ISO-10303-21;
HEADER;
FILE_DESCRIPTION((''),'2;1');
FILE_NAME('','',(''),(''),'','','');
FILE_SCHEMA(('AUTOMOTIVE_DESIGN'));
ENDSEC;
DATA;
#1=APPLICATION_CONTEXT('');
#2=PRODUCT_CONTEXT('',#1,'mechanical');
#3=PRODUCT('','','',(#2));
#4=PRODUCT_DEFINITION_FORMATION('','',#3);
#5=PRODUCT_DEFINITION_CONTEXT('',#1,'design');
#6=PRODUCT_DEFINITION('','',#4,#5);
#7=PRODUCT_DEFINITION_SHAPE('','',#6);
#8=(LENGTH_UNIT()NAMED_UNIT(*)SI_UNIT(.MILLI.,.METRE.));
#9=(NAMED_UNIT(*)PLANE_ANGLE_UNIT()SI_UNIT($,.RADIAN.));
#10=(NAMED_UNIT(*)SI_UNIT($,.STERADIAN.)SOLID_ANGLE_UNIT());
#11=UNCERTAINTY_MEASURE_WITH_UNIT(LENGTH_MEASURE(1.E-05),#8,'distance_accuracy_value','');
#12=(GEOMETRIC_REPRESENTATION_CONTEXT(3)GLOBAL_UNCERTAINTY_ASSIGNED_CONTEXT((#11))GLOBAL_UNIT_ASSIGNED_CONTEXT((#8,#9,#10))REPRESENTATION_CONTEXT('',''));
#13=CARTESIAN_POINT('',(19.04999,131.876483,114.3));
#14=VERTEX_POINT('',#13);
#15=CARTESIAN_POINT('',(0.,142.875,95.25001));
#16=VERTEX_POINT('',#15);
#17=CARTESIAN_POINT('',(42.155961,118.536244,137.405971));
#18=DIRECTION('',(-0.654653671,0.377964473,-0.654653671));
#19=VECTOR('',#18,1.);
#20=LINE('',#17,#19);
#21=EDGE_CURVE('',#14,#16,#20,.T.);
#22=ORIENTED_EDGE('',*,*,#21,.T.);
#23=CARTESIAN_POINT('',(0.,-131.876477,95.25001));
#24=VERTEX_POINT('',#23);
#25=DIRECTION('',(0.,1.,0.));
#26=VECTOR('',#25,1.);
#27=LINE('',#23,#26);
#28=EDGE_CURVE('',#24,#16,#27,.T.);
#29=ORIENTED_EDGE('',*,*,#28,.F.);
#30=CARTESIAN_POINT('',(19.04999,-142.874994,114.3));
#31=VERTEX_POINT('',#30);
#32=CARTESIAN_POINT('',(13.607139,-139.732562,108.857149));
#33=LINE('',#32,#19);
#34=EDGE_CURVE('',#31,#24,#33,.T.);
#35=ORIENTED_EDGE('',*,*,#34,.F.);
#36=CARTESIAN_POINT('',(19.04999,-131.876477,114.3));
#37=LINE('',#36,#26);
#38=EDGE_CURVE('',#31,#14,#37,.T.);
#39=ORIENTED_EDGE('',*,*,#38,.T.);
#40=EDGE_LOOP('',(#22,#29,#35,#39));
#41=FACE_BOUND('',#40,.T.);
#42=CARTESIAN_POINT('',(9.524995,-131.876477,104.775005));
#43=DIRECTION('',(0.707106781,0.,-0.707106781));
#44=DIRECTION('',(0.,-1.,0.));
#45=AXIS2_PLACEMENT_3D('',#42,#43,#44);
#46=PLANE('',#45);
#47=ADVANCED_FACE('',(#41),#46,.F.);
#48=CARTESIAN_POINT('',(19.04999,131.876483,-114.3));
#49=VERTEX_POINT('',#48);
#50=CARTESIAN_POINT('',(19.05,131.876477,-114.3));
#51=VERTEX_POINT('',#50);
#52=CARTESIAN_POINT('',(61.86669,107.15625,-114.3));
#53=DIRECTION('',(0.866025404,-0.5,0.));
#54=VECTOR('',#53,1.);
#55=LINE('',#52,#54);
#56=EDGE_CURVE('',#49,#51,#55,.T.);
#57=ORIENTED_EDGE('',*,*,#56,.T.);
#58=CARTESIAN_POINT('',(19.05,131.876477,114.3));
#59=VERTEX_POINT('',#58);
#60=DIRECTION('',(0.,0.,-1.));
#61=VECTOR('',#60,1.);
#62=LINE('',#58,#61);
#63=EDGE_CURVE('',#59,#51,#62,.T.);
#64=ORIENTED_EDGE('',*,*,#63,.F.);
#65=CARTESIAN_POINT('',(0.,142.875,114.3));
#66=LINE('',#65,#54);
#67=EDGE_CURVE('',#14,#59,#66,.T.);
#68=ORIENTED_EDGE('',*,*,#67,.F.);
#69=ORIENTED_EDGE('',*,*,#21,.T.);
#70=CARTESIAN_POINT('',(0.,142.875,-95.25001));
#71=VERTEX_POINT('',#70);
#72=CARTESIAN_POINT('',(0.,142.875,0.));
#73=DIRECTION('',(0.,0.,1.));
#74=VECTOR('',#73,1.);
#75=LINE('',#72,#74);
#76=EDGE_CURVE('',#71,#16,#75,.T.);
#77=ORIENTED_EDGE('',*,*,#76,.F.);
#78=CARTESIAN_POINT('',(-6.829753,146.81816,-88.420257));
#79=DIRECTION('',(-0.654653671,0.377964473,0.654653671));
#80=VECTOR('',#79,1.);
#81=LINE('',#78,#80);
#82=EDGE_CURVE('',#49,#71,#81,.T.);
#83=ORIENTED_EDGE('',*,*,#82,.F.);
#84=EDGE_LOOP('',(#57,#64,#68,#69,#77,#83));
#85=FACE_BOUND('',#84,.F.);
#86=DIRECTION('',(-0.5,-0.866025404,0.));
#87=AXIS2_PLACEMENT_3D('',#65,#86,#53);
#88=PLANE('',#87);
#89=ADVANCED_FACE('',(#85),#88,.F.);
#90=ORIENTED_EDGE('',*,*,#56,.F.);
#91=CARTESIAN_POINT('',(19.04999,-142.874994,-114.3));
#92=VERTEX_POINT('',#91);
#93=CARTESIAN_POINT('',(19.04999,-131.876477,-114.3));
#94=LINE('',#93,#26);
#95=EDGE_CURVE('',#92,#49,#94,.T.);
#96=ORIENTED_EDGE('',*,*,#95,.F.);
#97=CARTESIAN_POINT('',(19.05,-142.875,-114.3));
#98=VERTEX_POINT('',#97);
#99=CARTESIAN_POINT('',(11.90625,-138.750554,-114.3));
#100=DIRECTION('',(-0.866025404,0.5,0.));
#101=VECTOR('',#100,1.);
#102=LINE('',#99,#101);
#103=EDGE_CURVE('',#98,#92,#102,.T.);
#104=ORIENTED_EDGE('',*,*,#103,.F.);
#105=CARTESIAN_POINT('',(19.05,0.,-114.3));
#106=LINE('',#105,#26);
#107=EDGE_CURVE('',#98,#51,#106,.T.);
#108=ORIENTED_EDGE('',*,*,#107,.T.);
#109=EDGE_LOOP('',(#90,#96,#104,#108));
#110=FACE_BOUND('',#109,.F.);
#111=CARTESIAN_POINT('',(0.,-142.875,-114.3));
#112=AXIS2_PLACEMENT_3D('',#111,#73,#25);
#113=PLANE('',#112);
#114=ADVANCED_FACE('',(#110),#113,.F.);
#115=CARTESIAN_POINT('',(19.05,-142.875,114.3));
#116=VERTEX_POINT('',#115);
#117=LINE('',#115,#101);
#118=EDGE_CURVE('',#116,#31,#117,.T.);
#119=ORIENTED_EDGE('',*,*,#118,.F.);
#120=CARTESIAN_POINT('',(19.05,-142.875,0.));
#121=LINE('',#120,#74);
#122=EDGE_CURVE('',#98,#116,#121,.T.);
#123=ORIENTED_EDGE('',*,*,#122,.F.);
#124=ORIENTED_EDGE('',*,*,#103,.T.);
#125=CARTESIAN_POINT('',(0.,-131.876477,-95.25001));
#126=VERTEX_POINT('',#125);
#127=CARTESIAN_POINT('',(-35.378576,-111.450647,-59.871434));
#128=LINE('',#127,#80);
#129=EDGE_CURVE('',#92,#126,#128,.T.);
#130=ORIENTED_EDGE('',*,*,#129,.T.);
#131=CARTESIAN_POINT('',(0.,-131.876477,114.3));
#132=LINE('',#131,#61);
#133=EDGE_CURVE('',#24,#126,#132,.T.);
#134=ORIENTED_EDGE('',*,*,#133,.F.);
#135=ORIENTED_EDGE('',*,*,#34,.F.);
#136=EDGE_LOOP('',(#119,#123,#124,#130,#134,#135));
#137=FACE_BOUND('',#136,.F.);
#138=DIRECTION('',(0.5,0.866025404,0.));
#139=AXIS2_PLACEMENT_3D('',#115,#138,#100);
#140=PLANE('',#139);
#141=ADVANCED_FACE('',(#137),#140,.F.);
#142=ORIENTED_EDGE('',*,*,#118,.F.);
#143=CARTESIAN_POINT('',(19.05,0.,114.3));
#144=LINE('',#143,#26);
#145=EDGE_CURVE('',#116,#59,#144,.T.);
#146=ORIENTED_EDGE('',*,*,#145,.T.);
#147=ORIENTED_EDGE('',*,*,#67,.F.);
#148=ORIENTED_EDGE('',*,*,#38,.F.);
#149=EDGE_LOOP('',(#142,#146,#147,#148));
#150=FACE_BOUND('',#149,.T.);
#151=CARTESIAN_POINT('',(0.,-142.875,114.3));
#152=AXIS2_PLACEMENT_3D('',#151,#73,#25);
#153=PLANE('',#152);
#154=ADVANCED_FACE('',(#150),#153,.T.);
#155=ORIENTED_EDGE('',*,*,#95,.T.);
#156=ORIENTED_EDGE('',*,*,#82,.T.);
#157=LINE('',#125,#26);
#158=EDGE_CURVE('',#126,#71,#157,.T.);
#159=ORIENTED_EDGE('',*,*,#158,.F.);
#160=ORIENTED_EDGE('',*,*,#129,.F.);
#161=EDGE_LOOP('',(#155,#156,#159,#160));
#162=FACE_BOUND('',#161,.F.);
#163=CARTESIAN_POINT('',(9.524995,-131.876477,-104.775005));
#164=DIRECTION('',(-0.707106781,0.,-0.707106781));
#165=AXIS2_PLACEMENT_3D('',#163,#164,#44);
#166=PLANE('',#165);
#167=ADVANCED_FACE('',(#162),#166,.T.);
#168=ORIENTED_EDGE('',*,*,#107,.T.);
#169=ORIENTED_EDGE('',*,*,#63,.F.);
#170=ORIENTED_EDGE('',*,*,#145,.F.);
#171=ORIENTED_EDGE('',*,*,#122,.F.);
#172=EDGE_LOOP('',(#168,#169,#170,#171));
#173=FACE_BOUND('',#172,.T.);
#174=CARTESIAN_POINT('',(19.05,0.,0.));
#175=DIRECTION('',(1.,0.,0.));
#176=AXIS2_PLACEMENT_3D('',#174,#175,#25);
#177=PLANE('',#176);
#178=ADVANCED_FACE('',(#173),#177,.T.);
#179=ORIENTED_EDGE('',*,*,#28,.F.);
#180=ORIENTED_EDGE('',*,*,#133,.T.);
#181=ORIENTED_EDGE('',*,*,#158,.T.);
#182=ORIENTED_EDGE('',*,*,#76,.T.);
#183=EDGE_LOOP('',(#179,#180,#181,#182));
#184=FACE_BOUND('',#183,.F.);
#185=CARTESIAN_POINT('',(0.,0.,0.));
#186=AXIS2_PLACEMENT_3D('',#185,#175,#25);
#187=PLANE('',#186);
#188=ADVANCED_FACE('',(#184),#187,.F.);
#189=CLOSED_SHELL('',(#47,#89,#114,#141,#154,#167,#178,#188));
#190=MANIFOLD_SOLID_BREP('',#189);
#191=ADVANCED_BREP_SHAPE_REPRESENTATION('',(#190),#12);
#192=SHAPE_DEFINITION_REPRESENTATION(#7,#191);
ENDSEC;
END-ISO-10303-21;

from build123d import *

# Parameters (mm, degrees)
F0_W     = 285.75
F0_H     = 228.6
F1_DEPTH = 19.05
F3_DEPTH = 228.601
F4_SIZE  = 19.04999


# Not quite as in the source:
# - a fillet or chamfer is up to 0.001 mm smaller than in the source, because OpenCascade refuses the exact size


with BuildPart() as f1:
    # F0 (on Right) → F1 (new body)
    with BuildSketch(Plane.YZ):
        Rectangle(F0_W, F0_H)
    extrude(amount=F1_DEPTH)

    # F2 (on face) → F3 (cut, through all)
    with BuildSketch(Plane.XY.offset(114.3)):
        Polygon((0, -142.875), (19.05, -142.875), (0, -131.8764773719), align=None)
        Polygon((19.05, 142.875), (0, 142.875), (19.05, 131.8764773719), align=None)
    extrude(amount=-F3_DEPTH, mode=Mode.SUBTRACT)

    # F4 (size 19.05 in the source; OpenCascade refuses exactly that, so slightly less here)
    f4_edges = [f1.edges().sort_by_distance(p)[0] for p in [
        (0, 5.499261, 114.3),
        (0, 5.499261, -114.3),
    ]]
    chamfer(f4_edges, length=F4_SIZE)


solid = f1.part
